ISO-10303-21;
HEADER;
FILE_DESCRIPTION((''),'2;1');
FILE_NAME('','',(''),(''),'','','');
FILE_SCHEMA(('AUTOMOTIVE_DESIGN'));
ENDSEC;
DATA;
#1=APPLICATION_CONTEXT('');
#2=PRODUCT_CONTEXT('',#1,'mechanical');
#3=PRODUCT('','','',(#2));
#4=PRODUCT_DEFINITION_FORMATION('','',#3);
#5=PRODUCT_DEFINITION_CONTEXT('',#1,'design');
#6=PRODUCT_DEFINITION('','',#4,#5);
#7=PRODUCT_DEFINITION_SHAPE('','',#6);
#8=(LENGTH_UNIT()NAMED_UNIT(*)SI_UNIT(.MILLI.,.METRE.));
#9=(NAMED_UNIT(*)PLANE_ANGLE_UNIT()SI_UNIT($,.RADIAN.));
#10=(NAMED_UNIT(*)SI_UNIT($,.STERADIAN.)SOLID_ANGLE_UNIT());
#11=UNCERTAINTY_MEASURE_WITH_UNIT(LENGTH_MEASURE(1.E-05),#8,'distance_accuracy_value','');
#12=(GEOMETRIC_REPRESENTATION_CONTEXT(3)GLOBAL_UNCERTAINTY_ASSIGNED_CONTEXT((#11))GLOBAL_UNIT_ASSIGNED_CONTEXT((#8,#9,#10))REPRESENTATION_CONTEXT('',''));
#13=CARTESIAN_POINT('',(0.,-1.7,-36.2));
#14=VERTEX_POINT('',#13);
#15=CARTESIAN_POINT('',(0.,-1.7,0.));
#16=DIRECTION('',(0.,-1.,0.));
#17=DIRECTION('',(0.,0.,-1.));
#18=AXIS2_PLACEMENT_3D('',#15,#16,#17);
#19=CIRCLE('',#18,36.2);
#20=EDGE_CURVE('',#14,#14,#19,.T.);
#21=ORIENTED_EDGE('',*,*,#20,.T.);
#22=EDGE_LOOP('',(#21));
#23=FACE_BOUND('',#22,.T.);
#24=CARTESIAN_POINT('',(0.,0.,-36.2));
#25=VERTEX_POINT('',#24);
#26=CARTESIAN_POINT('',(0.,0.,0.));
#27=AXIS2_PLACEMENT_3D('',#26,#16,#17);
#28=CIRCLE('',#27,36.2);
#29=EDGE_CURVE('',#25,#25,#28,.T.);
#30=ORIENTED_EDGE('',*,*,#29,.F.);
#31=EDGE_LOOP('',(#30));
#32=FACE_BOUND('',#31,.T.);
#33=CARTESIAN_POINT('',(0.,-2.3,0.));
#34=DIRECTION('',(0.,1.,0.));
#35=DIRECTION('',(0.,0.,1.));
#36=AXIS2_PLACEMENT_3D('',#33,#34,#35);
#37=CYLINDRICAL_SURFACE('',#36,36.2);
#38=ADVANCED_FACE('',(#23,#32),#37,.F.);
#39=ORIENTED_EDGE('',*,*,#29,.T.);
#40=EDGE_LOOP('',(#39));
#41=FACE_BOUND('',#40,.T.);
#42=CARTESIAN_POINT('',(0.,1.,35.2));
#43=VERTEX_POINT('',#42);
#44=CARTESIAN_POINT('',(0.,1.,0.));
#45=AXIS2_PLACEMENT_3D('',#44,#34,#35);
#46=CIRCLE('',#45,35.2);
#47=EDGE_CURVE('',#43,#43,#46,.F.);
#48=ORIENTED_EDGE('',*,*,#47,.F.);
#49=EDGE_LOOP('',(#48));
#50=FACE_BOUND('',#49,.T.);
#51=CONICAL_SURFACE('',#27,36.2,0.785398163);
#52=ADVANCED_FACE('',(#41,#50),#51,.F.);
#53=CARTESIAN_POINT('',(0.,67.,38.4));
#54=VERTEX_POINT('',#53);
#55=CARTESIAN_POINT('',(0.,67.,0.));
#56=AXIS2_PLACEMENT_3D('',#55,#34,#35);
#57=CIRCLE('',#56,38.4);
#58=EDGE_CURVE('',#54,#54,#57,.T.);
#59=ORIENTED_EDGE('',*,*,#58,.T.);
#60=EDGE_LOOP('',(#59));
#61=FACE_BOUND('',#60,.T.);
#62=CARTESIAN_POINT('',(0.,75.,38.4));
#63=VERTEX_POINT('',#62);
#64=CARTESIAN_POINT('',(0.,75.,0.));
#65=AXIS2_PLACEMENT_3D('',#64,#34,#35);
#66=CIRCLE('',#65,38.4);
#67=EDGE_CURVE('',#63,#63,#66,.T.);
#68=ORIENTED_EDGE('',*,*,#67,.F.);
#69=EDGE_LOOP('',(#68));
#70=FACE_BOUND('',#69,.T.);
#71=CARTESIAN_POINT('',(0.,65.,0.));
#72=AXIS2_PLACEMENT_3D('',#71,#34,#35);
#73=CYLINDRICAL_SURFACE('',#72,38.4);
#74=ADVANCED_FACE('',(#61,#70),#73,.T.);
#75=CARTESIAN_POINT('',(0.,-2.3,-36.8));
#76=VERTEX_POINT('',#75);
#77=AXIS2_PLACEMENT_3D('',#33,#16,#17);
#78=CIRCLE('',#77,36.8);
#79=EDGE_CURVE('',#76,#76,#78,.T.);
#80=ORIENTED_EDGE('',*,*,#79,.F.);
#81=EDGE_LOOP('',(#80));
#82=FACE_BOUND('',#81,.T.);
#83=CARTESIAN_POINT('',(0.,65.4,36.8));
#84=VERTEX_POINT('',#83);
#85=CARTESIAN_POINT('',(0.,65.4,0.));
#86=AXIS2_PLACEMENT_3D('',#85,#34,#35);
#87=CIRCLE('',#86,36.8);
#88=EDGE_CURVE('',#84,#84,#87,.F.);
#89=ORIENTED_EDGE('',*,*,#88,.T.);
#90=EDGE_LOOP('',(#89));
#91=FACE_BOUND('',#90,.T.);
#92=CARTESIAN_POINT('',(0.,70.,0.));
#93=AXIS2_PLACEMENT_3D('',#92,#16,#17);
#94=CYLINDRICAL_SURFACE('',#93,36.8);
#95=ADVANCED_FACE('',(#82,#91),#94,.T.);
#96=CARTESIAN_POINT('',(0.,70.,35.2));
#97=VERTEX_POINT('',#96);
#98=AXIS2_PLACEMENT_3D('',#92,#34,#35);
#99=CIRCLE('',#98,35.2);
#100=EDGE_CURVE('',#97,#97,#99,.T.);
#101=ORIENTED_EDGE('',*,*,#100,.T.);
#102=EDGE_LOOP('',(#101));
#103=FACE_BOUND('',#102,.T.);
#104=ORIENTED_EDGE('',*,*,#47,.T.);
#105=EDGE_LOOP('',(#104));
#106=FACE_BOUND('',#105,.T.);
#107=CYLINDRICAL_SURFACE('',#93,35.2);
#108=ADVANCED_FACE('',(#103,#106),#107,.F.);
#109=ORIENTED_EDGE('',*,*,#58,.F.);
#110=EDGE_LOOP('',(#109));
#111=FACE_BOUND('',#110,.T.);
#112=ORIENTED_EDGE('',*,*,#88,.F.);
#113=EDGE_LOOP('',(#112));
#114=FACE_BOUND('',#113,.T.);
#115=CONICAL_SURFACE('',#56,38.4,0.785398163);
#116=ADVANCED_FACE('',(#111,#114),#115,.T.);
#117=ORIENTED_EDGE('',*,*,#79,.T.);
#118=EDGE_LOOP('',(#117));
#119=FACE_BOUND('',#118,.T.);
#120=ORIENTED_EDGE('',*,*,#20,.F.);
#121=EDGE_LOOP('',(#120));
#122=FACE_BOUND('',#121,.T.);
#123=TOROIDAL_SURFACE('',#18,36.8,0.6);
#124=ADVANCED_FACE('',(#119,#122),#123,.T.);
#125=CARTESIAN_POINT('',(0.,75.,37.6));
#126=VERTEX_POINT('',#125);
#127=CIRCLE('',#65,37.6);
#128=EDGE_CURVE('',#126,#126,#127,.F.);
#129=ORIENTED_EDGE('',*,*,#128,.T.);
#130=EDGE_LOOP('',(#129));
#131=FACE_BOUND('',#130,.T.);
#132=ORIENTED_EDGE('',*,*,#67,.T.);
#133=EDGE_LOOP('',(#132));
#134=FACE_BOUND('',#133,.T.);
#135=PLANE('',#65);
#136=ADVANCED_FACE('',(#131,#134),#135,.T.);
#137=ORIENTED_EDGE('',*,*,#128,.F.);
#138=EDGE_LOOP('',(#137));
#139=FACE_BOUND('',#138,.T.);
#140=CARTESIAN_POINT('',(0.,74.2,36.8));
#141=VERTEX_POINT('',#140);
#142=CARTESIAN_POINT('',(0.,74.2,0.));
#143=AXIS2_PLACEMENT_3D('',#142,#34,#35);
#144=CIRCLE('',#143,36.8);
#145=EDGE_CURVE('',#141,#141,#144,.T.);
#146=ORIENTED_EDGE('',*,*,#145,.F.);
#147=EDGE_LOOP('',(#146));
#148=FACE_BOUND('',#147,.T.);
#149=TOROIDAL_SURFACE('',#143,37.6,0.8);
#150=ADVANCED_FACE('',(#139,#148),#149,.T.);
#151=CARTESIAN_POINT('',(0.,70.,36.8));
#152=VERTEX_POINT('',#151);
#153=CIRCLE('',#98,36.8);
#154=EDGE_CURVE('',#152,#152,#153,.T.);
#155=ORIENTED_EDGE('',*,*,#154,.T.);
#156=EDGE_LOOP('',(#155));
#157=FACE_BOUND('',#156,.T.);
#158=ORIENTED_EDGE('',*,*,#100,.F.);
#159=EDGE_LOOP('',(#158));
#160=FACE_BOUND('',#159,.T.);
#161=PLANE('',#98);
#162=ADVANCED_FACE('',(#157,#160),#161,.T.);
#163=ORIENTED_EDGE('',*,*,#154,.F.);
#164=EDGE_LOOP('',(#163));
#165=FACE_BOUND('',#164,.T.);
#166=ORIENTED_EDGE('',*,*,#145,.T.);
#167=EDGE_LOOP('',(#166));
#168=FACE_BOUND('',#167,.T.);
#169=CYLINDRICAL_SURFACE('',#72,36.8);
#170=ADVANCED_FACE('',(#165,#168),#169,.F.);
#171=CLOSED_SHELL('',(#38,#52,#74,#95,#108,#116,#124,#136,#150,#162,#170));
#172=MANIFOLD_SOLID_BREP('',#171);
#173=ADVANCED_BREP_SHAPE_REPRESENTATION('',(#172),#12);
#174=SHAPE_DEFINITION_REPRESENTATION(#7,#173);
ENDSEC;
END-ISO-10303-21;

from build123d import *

# Parameters (mm, degrees)
SKETCH1_R                = 36.8
SKETCH1_R_2              = 35.2
BOSS_EXTRUDE1_DEPTH      = 70
BOSS_EXTRUDE2_DEPTH      = 5
BOSS_EXTRUDE2_DEPTH_BACK = 5
SKETCH2_R                = 38.4
SKETCH2_R_2              = 36.8
CHAMFER1_SIZE            = 2
FILLET1_R                = 0.8
BOSS_EXTRUDE3_START      = 2.3
SKETCH3_R                = 36.8
SKETCH3_R_2              = 36.2
BOSS_EXTRUDE3_DEPTH      = 2.3
CHAMFER2_SIZE            = 1
FILLET2_R                = 0.6


# Some blends are built 0.0001 mm under size
with BuildPart() as part:
    # Sketch1 → Boss-Extrude1 (new body)
    with BuildSketch(Plane(origin=(0, 0, 0), x_dir=(1, 0, 0), z_dir=(0, 1, 0))):
        with Locations(Location((0, 0, 0), (0, 0, 270))):
            Circle(SKETCH1_R)
        with Locations(Location((0, 0, 0), (0, 0, 270))):
            Circle(SKETCH1_R_2, mode=Mode.SUBTRACT)
    extrude(amount=BOSS_EXTRUDE1_DEPTH)

    # Sketch2 → Boss-Extrude2 (add, two sides: drawn at the far end of the back side and taken through both)
    with BuildSketch(Plane(origin=(0, 70, 0), x_dir=(1, 0, 0), z_dir=(0, 1, 0)).offset(-BOSS_EXTRUDE2_DEPTH_BACK)):
        with Locations(Location((0, 0, 0), (0, 0, 270))):
            Circle(SKETCH2_R)
        with Locations(Location((0, 0, 0), (0, 0, 270))):
            Circle(SKETCH2_R_2, mode=Mode.SUBTRACT)
    extrude(amount=BOSS_EXTRUDE2_DEPTH + BOSS_EXTRUDE2_DEPTH_BACK)

    # Chamfer1
    # the kernel refuses this chamfer: 2 mm, written as the material it takes off along each edge
    with BuildSketch(Plane(origin=(0, 65, 0), x_dir=(0, 0, 1), z_dir=(-1, 0, 0))) as chamfer1_piece_1_section:
        Polygon((38.4 - CHAMFER1_SIZE, 0), (38.4, CHAMFER1_SIZE), (38.4, 0), align=None)
    chamfer1_piece_1 = revolve(axis=Axis((0, 65, 0), (0, 1, 0)), mode=Mode.PRIVATE)
    chamfer1_piece_1 = chamfer1_piece_1 - Plane(origin=(0, 66.172330508, 0), x_dir=(0, 0, 1), z_dir=(0, -1, 0)) * Cylinder(36.8, 154, mode=Mode.PRIVATE)
    add(chamfer1_piece_1, mode=Mode.SUBTRACT)

    # Fillet1
    fillet1_edges = [part.edges().sort_by_distance(p)[0] for p in [
        (0, 75, -36.8),
    ]]
    fillet(fillet1_edges, radius=FILLET1_R)

    # Sketch3 → Boss-Extrude3 (add)
    with BuildSketch(Plane.XZ.offset(BOSS_EXTRUDE3_START)):
        with Locations(Location((0, 0, 0), (0, 0, 270))):
            Circle(SKETCH3_R)
        with Locations(Location((0, 0, 0), (0, 0, 270))):
            Circle(SKETCH3_R_2, mode=Mode.SUBTRACT)
    extrude(amount=-BOSS_EXTRUDE3_DEPTH)

    # Chamfer2
    chamfer2_edges = [part.edges().sort_by_distance(p)[0] for p in [
        (0, 0, -35.2),
    ]]
    chamfer(chamfer2_edges, length=CHAMFER2_SIZE - 0.0001)  # a hair under: the kernel refuses the full size

    # Fillet2
    fillet2_edges = [part.edges().sort_by_distance(p)[0] for p in [
        (0, -2.3, 36.2),
    ]]
    fillet(fillet2_edges, radius=FILLET2_R - 0.0001)  # a hair under: the kernel refuses the full size


solid = part.part
